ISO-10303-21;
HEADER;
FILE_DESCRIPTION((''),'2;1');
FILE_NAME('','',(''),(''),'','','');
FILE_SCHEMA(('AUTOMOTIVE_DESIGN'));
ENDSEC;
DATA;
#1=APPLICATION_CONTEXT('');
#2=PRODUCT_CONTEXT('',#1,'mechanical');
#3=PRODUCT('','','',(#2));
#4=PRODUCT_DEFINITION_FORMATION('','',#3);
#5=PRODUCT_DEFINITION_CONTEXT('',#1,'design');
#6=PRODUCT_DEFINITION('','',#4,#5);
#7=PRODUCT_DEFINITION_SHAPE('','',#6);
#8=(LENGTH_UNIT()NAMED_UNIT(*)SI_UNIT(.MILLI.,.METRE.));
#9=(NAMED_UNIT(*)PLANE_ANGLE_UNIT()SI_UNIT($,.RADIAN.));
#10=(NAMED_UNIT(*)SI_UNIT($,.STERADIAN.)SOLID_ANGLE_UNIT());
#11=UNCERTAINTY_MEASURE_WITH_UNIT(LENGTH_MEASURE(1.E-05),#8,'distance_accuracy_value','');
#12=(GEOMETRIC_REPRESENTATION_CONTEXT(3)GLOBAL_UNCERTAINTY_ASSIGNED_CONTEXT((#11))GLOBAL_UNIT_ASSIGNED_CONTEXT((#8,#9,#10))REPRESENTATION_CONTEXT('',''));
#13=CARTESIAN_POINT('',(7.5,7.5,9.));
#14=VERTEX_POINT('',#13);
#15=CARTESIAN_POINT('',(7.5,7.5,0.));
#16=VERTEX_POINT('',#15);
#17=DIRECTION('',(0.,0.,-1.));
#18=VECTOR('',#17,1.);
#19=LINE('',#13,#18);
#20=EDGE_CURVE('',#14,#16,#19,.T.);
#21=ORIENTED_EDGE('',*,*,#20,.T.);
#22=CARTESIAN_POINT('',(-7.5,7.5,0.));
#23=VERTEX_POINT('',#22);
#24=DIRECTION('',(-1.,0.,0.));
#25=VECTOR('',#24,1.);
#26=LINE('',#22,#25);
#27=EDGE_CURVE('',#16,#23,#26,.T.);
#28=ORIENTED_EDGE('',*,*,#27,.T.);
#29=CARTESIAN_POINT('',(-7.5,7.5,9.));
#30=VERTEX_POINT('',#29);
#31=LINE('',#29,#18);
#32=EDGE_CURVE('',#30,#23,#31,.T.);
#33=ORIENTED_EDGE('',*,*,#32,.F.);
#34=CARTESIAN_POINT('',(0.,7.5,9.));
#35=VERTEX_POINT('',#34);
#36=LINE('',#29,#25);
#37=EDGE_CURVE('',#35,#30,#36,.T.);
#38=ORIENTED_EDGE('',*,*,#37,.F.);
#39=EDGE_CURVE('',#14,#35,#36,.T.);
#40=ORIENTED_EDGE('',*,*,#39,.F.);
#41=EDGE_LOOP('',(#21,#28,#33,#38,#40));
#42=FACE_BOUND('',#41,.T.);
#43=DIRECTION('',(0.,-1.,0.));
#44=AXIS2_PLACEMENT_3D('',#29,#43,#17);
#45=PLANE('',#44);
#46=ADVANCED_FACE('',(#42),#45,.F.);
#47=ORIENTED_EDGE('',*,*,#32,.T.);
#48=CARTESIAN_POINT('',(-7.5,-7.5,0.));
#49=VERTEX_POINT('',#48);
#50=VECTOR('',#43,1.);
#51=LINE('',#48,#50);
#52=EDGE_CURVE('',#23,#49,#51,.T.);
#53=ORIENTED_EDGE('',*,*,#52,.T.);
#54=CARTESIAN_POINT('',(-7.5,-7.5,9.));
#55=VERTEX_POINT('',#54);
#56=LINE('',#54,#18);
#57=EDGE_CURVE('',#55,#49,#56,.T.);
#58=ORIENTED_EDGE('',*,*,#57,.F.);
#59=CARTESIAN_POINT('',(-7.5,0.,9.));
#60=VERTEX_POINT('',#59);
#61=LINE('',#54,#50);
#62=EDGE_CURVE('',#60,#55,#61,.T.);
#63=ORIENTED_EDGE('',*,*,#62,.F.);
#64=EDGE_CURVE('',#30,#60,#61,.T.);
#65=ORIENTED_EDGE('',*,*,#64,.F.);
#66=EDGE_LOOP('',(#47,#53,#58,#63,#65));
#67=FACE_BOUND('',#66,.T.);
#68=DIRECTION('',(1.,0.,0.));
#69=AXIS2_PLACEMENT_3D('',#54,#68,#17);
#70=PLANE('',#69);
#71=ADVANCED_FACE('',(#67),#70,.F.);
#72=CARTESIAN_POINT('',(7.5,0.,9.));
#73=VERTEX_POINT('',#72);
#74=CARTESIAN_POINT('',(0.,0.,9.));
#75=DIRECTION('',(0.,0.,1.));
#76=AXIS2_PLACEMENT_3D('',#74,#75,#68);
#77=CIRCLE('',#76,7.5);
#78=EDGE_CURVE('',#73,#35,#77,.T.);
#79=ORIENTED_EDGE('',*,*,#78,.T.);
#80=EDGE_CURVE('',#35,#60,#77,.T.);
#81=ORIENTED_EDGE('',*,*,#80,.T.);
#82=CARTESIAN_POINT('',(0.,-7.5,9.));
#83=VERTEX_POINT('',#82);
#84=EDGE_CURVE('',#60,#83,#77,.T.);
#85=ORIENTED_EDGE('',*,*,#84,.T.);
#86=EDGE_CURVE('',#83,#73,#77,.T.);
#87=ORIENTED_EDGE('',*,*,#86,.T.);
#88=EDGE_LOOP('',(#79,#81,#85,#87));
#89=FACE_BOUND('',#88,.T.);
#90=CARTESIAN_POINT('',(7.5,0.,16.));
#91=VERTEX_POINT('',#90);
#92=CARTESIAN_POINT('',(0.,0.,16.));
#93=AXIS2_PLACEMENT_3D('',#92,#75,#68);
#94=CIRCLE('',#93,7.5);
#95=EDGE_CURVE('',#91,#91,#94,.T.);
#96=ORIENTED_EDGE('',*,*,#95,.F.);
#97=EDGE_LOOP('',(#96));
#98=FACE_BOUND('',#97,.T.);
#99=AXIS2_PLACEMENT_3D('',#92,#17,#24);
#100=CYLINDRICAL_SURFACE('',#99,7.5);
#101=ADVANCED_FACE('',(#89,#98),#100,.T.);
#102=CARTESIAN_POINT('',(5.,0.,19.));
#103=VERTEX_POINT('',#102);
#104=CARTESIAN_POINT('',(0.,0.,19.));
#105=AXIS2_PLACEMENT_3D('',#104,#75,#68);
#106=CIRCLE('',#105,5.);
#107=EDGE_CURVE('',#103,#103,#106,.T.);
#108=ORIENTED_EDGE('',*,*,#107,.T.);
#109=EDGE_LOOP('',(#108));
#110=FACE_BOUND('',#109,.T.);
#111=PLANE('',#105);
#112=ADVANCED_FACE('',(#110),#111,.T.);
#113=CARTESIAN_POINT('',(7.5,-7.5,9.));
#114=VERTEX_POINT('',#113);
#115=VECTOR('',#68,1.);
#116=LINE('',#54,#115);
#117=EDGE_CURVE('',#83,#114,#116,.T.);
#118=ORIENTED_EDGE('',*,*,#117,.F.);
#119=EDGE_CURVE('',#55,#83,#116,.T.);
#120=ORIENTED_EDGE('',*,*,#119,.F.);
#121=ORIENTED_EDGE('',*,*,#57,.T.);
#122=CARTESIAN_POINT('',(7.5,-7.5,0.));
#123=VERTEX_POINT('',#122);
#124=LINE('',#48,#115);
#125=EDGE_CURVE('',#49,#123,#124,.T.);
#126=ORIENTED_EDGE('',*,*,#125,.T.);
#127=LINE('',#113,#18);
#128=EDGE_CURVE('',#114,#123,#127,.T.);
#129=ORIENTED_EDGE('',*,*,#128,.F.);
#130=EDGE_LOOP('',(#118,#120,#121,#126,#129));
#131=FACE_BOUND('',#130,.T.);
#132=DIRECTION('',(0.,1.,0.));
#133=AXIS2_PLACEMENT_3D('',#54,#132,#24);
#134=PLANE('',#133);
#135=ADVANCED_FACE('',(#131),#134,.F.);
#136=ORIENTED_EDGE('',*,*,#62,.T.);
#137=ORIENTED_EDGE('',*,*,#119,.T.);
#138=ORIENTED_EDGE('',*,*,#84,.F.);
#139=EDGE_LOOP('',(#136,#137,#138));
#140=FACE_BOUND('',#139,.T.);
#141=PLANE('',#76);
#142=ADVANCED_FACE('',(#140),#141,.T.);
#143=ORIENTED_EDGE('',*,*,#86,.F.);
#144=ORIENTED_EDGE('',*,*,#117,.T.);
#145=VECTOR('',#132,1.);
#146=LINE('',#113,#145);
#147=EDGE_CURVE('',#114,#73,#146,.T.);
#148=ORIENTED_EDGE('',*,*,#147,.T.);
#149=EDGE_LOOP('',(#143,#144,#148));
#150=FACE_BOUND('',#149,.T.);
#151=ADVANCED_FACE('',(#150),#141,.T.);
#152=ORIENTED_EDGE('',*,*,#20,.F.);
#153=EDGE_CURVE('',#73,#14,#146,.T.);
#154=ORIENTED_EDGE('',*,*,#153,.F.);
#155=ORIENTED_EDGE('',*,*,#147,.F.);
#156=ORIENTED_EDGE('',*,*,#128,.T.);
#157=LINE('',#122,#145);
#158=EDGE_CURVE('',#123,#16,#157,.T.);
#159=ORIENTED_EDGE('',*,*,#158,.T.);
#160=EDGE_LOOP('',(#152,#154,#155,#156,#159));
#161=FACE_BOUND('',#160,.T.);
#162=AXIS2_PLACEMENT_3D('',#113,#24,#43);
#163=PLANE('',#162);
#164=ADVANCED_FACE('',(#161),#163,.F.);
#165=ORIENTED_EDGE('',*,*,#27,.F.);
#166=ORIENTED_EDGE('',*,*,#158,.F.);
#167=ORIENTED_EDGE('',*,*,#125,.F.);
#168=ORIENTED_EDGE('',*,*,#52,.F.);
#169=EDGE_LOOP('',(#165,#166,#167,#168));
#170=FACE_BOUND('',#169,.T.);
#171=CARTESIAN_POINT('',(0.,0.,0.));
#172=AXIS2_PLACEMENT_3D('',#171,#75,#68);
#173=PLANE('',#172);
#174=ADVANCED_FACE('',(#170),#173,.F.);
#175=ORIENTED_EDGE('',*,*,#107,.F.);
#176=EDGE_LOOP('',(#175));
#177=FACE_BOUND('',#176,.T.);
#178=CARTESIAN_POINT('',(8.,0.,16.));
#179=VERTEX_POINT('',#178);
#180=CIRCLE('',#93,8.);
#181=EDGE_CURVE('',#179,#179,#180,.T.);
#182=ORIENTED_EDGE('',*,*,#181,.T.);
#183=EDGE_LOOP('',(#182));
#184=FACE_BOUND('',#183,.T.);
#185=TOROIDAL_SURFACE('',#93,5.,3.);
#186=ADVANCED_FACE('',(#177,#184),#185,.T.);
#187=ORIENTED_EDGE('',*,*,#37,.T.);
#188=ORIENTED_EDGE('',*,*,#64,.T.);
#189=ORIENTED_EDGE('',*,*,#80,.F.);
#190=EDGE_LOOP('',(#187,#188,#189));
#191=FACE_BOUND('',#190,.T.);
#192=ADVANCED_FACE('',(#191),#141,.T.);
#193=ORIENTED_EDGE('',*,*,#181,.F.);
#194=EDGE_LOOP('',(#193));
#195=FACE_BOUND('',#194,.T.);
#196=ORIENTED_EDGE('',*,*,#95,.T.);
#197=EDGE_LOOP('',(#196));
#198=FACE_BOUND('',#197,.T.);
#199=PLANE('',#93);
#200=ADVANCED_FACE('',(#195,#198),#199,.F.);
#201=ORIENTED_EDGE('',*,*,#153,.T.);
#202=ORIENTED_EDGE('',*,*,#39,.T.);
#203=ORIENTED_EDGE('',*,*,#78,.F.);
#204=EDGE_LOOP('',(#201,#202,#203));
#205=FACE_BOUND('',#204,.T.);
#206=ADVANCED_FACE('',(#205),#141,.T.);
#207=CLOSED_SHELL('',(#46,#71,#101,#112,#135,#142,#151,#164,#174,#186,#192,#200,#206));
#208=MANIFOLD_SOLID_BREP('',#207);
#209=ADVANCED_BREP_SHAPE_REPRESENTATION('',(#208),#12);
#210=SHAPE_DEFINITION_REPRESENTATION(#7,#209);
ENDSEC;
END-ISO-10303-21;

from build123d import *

# Parameters (mm, degrees)
SKETCH_1_W      = 15
SKETCH_1_H      = 15
EXTRUDE_1_DEPTH = 9
SKETCH_5_R      = 7.5
EXTRUDE_2_DEPTH = 7
SKETCH_6_R      = 8
EXTRUDE_3_DEPTH = 3
FILLET_1_R      = 3


with BuildPart() as part:
    # 草图1 → 凸台-拉伸1 (new body)
    with BuildSketch(Plane.XY):
        Rectangle(SKETCH_1_W, SKETCH_1_H)
    extrude(amount=EXTRUDE_1_DEPTH)

    # 草图5 → 凸台-拉伸2 (add)
    with BuildSketch(Plane.XY.offset(9)):
        Circle(SKETCH_5_R)
    extrude(amount=EXTRUDE_2_DEPTH)

    # 草图6 → 凸台-拉伸3 (add)
    with BuildSketch(Plane.XY.offset(16)):
        Circle(SKETCH_6_R)
    extrude(amount=EXTRUDE_3_DEPTH)

    # 圆角1
    fillet_1_edges = [part.edges().sort_by_distance(p)[0] for p in [
        (-8, 0, 19),
    ]]
    fillet(fillet_1_edges, radius=FILLET_1_R - 0.0001)  # a hair under: the kernel refuses the full size


solid = part.part
